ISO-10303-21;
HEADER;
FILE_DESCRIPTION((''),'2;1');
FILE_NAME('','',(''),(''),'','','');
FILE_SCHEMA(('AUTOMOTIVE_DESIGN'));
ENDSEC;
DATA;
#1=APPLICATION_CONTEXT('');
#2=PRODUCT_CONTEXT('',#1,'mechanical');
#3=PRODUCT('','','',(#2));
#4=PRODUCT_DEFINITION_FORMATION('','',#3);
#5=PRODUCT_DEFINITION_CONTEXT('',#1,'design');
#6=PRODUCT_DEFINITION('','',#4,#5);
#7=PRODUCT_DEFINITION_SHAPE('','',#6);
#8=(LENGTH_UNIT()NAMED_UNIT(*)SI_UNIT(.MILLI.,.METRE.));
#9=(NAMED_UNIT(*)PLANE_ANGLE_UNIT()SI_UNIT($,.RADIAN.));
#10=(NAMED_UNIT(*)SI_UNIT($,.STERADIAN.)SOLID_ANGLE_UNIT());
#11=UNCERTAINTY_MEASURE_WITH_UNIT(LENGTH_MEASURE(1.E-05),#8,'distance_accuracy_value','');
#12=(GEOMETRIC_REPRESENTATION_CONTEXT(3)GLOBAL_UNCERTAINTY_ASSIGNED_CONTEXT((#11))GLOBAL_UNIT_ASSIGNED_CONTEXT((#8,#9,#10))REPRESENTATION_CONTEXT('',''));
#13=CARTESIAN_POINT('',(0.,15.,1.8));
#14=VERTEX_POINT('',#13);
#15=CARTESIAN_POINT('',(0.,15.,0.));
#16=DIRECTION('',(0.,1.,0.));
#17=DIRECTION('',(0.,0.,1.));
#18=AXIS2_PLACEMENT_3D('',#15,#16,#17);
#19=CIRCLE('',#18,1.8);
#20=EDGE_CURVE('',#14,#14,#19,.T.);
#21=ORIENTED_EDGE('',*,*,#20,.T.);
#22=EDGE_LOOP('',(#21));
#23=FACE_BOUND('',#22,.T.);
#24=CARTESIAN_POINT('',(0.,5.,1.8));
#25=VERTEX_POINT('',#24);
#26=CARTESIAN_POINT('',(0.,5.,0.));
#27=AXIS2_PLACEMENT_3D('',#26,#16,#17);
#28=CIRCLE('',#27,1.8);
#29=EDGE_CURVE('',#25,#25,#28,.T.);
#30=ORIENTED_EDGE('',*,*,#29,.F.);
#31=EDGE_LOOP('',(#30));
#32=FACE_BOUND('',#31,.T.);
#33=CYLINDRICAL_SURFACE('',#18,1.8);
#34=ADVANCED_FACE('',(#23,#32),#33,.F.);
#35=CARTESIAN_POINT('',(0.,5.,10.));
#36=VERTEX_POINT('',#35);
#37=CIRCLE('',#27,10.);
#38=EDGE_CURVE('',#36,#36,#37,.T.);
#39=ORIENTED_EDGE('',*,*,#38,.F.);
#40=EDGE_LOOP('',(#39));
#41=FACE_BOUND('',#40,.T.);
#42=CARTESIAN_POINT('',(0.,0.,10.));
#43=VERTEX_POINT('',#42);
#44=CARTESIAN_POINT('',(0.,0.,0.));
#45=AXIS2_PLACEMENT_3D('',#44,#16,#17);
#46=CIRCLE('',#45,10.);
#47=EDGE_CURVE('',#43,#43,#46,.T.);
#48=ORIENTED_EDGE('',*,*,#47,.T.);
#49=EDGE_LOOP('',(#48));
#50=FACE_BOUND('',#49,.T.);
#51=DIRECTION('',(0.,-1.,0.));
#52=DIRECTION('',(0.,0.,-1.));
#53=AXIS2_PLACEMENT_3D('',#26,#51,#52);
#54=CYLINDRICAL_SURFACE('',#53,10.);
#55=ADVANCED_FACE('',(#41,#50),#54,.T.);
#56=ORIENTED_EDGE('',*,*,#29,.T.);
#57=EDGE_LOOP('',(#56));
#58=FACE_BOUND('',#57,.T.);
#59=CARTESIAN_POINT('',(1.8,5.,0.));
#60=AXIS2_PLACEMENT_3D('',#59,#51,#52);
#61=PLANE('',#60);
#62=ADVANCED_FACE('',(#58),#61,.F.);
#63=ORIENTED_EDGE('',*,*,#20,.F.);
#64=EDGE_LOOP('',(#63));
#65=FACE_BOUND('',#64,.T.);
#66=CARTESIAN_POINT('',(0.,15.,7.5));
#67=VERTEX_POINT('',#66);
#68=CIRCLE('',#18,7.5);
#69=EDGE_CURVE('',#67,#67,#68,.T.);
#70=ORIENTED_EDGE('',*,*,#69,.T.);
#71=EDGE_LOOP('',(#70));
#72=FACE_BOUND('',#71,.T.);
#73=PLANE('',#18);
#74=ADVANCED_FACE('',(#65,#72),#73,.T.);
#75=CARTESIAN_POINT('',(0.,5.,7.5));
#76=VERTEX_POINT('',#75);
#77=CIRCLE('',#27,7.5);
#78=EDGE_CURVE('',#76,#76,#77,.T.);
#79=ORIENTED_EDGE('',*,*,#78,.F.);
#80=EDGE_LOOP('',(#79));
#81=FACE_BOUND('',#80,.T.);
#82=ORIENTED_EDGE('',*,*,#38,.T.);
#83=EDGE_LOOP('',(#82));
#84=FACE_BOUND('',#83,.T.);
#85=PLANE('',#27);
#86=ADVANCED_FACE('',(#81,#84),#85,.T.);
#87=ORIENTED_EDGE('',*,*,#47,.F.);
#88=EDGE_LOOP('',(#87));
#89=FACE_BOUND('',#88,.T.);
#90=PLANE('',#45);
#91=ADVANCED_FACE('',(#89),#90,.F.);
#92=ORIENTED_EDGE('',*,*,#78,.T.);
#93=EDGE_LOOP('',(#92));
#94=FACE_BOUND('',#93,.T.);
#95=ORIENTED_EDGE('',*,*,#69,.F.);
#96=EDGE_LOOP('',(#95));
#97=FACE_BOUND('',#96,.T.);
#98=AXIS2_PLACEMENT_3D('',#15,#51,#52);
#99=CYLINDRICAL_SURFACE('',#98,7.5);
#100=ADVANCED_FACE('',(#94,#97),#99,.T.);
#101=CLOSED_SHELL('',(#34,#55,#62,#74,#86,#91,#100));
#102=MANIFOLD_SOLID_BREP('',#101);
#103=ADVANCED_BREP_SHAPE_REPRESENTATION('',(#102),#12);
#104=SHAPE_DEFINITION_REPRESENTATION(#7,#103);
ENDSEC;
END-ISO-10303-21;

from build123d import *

# Parameters (mm, degrees)
SKETCH_1_R        = 10
EXTRUDE_1_DEPTH   = 5
SKETCH_2_R        = 7.5
EXTRUDE_2_DEPTH   = 10
OTHER_START       = 5
OTHER_1_OUTLINE_R = 1.8
OTHER_1_DEPTH     = 10


# Read off the part's stored shape, not the designer's step: 高级异型孔1
with BuildPart() as part:
    # 草图1 → 凸台-拉伸1 (new body)
    with BuildSketch(Plane(origin=(0, 0, 0), x_dir=(1, 0, 0), z_dir=(0, 1, 0))):
        with Locations(Location((0, 0, 0), (0, 0, 270))):
            Circle(SKETCH_1_R)
    extrude(amount=EXTRUDE_1_DEPTH)

    # 草图2 → 凸台-拉伸2 (add)
    with BuildSketch(Plane(origin=(0, 5, 0), x_dir=(1, 0, 0), z_dir=(0, 1, 0))):
        with Locations(Location((0, 0, 0), (0, 0, 270))):
            Circle(SKETCH_2_R)
    extrude(amount=EXTRUDE_2_DEPTH)

    # 高级异型孔1 outline → 高级异型孔1 (cut)
    with BuildSketch(Plane(origin=(0, 0, 0), x_dir=(1, 0, 0), z_dir=(0, 1, 0)).offset(OTHER_START)):
        Circle(OTHER_1_OUTLINE_R)
    extrude(amount=OTHER_1_DEPTH, mode=Mode.SUBTRACT)


solid = part.part
